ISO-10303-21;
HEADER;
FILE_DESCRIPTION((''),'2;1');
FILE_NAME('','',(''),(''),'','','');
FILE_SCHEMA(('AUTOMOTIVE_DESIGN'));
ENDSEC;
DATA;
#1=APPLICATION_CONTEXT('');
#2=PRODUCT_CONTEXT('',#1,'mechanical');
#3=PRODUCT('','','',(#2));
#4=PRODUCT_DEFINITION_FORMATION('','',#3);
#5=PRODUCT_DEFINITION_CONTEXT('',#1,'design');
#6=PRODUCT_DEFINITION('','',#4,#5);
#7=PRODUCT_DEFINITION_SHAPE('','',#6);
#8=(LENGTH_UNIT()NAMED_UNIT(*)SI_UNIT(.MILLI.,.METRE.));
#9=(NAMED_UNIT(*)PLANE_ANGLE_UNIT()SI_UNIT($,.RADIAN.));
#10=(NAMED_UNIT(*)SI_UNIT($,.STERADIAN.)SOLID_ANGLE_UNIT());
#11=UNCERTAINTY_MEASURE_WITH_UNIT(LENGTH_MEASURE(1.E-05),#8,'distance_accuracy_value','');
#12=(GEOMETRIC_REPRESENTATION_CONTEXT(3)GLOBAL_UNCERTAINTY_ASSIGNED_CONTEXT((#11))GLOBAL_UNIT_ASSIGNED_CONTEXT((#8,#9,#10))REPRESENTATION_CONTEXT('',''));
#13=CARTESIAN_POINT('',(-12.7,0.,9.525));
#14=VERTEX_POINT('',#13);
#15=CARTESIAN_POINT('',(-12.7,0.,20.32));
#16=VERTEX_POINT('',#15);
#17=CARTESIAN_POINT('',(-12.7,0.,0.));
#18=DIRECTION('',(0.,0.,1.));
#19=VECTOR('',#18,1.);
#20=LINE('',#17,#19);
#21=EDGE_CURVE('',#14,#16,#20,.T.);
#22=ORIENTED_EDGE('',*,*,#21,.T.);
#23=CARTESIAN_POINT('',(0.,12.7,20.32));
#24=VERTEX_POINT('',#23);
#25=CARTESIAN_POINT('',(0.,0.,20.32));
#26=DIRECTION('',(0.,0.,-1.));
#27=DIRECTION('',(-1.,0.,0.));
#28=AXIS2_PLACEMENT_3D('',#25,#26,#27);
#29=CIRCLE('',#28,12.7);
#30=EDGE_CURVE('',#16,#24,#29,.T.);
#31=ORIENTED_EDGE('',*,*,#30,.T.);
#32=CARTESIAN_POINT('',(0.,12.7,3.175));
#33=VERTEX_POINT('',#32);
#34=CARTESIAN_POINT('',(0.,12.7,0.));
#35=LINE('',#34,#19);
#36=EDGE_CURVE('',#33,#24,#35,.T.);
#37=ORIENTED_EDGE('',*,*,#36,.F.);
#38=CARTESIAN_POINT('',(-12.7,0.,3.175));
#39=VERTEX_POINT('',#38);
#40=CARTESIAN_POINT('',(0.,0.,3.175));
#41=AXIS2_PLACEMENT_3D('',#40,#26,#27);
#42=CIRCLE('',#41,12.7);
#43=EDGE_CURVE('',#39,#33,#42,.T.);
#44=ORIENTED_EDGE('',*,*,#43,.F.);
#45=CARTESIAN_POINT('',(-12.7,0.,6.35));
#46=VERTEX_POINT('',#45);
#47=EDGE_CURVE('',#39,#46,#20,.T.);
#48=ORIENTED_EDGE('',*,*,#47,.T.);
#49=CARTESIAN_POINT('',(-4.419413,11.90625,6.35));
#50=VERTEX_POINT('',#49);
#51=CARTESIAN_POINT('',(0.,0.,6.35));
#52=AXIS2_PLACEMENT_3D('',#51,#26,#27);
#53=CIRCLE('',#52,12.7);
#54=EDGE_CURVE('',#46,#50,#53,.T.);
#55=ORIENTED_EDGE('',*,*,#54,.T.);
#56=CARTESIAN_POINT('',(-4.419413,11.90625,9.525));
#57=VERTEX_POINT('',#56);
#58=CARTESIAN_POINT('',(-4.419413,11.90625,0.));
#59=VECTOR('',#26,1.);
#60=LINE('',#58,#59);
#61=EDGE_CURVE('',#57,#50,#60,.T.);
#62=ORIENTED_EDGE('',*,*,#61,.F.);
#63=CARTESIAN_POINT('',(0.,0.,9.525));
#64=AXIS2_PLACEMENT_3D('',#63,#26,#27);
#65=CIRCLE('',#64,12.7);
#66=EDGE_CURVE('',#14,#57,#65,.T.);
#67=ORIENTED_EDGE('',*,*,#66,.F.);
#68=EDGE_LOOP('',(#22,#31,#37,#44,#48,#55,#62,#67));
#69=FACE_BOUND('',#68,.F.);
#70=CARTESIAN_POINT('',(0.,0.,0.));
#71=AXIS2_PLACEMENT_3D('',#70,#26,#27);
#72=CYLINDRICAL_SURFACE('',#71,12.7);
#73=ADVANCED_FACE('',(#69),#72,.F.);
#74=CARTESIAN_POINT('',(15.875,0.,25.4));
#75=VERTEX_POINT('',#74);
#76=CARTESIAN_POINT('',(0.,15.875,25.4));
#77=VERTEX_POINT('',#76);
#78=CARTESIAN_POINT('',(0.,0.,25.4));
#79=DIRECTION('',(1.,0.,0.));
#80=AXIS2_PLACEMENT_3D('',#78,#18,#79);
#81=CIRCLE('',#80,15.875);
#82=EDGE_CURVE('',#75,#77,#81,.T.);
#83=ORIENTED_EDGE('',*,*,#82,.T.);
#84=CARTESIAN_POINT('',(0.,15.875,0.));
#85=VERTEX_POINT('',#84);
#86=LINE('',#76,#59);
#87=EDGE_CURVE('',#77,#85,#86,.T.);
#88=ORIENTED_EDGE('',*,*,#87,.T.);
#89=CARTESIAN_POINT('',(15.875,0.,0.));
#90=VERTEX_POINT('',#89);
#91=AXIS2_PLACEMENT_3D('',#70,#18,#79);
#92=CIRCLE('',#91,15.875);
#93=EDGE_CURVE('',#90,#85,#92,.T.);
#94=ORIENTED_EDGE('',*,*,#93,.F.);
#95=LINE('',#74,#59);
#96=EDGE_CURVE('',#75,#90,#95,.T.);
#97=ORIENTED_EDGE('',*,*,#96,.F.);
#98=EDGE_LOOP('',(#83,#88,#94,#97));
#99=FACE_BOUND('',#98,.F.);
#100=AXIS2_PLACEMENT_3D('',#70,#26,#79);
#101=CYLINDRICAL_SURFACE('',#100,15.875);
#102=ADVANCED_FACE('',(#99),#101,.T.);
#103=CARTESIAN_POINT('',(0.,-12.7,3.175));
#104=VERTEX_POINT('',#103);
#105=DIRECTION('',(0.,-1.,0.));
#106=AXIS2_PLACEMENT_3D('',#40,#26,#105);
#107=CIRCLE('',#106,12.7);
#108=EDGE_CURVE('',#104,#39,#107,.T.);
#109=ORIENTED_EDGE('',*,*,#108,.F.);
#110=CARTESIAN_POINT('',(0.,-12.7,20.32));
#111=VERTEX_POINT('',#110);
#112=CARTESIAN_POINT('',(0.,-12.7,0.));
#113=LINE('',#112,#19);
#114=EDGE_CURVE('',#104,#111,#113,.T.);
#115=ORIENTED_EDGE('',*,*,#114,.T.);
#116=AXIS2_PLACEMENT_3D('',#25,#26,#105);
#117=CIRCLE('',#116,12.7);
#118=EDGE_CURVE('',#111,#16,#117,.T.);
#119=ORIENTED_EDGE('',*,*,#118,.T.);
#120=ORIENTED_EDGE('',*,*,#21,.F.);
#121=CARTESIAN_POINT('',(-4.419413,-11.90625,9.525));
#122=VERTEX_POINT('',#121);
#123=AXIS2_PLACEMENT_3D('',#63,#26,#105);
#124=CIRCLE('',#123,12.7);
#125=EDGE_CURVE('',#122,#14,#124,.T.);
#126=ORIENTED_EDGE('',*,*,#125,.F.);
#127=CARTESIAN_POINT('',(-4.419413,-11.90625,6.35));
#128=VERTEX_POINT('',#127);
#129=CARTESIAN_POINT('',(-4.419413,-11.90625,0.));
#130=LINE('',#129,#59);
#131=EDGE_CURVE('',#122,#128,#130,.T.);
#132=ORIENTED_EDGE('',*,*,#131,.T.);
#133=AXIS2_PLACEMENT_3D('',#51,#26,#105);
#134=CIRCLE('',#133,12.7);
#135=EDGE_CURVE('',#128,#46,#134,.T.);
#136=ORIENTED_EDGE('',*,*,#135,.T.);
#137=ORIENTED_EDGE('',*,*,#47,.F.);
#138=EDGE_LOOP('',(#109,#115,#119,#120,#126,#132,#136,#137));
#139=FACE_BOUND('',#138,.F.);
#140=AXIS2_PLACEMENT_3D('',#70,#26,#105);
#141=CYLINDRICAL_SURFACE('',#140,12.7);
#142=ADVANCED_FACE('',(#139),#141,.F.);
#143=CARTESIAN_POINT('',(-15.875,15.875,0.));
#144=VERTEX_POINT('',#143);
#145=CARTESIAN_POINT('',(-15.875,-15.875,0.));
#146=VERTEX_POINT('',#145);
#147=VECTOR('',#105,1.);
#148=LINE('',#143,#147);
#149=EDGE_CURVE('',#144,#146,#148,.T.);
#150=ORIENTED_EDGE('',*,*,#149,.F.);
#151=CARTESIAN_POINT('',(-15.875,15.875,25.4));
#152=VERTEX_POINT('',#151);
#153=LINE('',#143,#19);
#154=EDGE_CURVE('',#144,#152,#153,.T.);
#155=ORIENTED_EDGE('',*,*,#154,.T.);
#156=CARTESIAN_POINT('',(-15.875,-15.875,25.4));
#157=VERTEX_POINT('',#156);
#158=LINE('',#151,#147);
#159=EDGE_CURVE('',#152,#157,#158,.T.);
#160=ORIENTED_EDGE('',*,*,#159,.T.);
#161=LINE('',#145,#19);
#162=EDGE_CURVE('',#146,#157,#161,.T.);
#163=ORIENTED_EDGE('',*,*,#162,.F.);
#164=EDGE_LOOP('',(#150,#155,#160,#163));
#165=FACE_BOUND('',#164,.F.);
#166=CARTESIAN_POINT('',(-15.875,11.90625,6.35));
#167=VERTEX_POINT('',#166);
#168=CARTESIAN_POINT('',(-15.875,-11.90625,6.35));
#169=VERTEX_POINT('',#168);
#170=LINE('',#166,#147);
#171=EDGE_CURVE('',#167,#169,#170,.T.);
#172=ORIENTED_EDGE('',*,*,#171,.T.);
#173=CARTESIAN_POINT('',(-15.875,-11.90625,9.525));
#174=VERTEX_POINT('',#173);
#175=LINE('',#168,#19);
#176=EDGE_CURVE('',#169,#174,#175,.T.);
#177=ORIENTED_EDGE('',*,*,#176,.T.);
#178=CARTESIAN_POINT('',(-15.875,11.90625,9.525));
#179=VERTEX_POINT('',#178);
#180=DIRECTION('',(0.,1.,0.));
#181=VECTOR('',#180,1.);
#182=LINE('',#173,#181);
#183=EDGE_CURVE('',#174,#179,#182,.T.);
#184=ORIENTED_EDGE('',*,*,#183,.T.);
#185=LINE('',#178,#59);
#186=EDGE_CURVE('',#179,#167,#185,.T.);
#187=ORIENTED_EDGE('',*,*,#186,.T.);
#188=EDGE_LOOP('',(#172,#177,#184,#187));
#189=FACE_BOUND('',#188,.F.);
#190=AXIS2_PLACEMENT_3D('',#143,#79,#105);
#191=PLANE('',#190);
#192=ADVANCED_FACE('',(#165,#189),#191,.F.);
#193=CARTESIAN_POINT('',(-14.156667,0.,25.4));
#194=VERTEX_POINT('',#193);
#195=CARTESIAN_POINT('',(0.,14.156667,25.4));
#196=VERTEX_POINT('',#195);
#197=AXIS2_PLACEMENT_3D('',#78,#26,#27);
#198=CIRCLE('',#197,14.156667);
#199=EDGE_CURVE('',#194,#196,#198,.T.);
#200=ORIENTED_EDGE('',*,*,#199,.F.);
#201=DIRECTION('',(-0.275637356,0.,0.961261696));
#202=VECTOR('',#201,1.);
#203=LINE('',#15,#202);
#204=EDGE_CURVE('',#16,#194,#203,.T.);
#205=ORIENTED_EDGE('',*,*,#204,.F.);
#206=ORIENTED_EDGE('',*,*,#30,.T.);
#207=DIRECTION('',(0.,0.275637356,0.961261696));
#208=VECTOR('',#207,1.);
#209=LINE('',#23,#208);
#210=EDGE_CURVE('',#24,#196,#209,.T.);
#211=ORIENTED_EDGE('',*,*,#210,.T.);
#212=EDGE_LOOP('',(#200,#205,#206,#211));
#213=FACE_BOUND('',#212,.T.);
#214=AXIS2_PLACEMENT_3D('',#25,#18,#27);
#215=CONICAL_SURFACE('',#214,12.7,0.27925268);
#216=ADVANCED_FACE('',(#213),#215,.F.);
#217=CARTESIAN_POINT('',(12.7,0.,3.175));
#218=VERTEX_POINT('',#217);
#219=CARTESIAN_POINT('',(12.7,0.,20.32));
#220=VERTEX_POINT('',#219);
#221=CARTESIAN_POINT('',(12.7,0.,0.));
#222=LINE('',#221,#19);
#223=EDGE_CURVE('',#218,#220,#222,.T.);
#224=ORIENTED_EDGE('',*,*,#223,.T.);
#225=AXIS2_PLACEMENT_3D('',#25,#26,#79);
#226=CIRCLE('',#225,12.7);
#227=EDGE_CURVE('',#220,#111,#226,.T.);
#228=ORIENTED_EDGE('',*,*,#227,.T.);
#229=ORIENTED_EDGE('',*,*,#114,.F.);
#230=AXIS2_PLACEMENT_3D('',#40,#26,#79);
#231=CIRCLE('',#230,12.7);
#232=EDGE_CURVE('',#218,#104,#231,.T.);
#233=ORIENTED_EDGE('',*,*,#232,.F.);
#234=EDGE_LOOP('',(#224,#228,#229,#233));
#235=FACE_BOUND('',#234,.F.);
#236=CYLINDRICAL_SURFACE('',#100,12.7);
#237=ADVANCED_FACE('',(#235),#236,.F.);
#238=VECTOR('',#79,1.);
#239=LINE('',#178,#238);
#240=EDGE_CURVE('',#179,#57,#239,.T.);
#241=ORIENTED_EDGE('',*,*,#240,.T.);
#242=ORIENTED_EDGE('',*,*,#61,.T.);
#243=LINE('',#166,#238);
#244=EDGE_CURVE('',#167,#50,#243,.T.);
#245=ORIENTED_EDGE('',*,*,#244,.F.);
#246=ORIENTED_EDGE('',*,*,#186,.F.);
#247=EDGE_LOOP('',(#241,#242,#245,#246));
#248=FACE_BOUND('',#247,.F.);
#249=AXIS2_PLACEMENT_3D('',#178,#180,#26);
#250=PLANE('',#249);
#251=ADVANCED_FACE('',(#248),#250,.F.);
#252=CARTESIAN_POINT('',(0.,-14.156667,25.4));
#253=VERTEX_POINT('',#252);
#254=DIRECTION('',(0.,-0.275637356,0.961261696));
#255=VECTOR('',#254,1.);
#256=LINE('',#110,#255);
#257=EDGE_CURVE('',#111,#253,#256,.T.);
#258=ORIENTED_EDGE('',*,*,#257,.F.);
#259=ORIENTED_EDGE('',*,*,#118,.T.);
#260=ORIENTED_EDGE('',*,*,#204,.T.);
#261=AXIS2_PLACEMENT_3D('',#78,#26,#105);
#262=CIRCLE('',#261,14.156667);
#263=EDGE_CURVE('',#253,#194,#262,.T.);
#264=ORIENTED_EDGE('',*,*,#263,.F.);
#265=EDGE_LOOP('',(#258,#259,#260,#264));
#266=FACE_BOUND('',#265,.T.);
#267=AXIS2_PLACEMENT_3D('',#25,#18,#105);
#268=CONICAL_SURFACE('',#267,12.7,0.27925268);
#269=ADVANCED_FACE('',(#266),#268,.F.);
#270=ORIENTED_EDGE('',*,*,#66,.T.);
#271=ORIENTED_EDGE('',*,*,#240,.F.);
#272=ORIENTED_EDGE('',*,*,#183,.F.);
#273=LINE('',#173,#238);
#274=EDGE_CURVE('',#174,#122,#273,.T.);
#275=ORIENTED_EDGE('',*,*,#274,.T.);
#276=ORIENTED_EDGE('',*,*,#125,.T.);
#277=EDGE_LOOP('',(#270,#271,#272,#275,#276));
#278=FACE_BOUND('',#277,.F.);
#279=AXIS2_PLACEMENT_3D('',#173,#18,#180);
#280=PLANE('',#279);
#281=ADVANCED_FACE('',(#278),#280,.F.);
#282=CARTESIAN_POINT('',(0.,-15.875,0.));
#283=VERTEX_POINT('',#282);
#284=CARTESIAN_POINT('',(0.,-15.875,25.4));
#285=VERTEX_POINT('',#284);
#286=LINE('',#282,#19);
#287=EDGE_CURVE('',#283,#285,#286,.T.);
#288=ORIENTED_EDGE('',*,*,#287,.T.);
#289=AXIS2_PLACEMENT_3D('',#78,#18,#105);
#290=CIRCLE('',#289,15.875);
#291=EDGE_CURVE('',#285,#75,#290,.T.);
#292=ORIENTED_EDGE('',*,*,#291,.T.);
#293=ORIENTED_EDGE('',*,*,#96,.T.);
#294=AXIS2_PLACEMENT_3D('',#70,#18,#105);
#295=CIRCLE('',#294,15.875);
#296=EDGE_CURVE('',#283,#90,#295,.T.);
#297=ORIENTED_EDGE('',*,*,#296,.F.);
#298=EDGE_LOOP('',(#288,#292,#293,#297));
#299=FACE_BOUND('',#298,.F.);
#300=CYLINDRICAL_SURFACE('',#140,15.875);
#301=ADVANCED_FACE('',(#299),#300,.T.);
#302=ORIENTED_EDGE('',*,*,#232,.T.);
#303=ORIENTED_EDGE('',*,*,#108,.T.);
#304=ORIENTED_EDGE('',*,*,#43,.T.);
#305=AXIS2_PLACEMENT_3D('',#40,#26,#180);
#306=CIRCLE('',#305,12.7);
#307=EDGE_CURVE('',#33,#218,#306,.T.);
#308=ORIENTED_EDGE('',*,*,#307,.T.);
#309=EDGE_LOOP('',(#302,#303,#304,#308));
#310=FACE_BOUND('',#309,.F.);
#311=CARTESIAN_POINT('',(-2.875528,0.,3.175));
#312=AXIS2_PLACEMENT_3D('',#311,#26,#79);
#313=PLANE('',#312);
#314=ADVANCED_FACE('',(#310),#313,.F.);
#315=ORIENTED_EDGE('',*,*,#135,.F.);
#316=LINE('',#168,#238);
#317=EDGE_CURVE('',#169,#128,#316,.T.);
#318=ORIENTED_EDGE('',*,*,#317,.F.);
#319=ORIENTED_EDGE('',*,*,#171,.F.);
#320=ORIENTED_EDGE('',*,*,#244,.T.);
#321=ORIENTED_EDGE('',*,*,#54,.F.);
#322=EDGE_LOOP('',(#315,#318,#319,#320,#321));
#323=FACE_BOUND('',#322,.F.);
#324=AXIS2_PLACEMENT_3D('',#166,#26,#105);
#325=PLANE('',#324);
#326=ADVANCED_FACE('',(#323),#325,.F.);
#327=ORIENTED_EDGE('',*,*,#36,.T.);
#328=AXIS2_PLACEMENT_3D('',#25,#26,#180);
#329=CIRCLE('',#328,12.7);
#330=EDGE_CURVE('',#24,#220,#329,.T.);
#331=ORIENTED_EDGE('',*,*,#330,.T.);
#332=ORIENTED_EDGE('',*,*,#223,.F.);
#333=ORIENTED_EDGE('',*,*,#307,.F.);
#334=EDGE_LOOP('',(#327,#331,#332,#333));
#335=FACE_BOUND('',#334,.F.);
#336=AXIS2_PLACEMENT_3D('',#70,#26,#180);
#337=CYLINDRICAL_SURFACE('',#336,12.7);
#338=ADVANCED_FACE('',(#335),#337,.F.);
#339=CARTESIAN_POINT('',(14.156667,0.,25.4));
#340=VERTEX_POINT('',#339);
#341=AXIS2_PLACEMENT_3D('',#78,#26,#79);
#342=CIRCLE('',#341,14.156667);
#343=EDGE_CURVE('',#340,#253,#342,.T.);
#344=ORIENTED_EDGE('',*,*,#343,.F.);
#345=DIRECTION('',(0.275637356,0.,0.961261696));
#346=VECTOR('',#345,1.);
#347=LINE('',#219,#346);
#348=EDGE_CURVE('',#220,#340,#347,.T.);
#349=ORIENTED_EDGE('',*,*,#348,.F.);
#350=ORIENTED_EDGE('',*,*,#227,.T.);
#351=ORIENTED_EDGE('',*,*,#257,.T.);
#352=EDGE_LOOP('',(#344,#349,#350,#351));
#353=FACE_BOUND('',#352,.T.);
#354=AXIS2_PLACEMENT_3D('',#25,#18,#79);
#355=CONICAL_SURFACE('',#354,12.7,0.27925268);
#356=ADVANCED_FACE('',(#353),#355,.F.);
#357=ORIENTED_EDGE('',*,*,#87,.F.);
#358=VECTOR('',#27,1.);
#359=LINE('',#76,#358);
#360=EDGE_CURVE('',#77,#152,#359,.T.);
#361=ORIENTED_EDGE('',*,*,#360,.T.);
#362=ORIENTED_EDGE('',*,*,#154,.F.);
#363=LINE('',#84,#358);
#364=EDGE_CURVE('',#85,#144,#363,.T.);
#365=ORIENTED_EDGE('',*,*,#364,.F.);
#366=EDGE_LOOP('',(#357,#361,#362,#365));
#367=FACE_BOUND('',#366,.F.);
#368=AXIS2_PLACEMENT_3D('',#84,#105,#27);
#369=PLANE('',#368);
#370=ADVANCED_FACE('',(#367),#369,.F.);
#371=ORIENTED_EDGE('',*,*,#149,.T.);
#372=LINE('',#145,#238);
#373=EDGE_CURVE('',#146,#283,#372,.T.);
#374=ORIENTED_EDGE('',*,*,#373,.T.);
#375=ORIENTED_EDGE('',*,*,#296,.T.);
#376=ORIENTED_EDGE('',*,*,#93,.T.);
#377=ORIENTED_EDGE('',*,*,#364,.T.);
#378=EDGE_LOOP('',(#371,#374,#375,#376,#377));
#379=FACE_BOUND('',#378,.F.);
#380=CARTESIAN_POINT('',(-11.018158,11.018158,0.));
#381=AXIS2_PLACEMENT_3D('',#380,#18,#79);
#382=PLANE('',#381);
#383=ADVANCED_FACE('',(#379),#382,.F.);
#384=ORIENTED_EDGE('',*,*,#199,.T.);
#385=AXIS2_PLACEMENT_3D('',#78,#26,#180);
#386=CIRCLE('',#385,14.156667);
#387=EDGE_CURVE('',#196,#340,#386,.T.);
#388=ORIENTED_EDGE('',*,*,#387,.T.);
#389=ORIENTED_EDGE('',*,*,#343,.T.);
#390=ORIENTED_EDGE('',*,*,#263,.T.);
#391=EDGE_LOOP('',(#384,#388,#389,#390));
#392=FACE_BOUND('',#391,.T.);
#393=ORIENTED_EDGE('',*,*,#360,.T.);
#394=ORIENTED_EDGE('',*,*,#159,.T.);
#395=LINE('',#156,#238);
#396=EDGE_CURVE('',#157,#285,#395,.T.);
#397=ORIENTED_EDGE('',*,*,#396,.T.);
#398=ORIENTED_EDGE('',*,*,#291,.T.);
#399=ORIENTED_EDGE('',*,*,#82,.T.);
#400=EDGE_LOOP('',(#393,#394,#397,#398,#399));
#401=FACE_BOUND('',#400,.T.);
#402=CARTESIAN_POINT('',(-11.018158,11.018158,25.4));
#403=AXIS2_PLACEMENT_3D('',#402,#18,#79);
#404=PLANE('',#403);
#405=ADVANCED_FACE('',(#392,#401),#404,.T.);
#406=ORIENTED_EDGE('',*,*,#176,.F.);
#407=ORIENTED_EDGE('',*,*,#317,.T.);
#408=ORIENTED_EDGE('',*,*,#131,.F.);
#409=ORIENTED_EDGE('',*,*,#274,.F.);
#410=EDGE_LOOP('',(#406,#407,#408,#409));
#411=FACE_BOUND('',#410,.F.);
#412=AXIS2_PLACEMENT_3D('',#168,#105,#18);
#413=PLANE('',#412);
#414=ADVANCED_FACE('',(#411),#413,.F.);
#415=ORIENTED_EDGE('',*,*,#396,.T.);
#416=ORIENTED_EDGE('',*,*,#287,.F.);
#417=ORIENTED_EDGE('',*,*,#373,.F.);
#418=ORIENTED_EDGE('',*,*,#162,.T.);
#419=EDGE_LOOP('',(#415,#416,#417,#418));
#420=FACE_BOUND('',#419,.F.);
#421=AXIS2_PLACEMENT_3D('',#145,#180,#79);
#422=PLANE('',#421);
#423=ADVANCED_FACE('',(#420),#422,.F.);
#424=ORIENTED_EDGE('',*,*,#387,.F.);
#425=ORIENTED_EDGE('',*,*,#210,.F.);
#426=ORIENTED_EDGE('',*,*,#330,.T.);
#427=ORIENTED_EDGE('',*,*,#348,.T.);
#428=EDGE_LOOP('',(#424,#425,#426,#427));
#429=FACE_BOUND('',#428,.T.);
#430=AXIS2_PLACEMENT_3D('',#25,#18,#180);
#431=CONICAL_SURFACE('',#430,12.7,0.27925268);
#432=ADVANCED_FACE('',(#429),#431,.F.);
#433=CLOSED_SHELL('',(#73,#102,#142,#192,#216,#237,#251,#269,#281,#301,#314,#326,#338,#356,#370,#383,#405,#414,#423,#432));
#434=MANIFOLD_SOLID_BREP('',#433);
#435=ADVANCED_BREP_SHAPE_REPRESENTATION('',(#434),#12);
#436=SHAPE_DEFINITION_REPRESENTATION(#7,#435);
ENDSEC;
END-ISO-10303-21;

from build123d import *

# Parameters (mm, degrees)
F1_DEPTH = 25.4
F2_R     = 12.7
F3_DEPTH = 3.175
F5_DEPTH = 12.7
F6_SIZE2 = 1.4566665597
F6_SIZE  = 5.08


with BuildPart() as f1:
    # F0 (on Top) → F1 (new body)
    with BuildSketch(Plane.XY):
        with BuildLine():
            ThreePointArc((-15.875, 0), (-11.2253201513, 11.2253201513), (0, 15.875))
            Line((0, 15.875), (-15.875, 15.875))
            Line((-15.875, 15.875), (-15.875, 0))
        make_face()
        with BuildLine():
            Line((-15.875, -15.875), (0, -15.875))
            ThreePointArc((0, -15.875), (-11.2253201513, -11.2253201513), (-15.875, 0))
            Line((-15.875, 0), (-15.875, -15.875))
        make_face()
        with BuildLine():
            Line((0, -15.875), (0, -12.7))
            ThreePointArc((0, -12.7), (-8.9802561211, -8.9802561211), (-12.7, 0))
            Line((-12.7, 0), (-15.875, 0))
            ThreePointArc((-15.875, 0), (-11.2253201513, -11.2253201513), (0, -15.875))
        make_face()
        with BuildLine():
            ThreePointArc((-12.7, 0), (-8.9802561211, 8.9802561211), (0, 12.7))
            Line((0, 12.7), (0, 15.875))
            ThreePointArc((0, 15.875), (-11.2253201513, 11.2253201513), (-15.875, 0))
            Line((-15.875, 0), (-12.7, 0))
        make_face()
        with BuildLine():
            ThreePointArc((0, 12.7), (8.9802561211, 8.9802561211), (12.7, 0))
            ThreePointArc((12.7, 0), (8.9802561211, -8.9802561211), (0, -12.7))
            Line((0, -12.7), (0, -15.875))
            ThreePointArc((0, -15.875), (11.2253201513, -11.2253201513), (15.875, 0))
            ThreePointArc((15.875, 0), (11.2253201513, 11.2253201513), (0, 15.875))
            Line((0, 15.875), (0, 12.7))
        make_face()
    extrude(amount=F1_DEPTH)

    # F2 (on face) → F3 (join)
    with BuildSketch(Plane(origin=(0, 0, 0), x_dir=(1, 0, 0), z_dir=(0, 0, -1))):
        with BuildLine():
            Line((-15.875, 15.875), (-15.875, -15.875))
            Line((-15.875, -15.875), (0, -15.875))
            ThreePointArc((0, -15.875), (15.875, 0), (0, 15.875))
            Line((0, 15.875), (-15.875, 15.875))
        make_face()
        Circle(F2_R, mode=Mode.SUBTRACT)
        Circle(F2_R)
    extrude(amount=-F3_DEPTH)

    # F4 (on face) → F5 (cut)
    with BuildSketch(Plane(origin=(-15.875, 0, 0), x_dir=(0, -1, 0), z_dir=(-1, 0, 0))):
        Polygon((0, 6.35), (0, 9.525), (-7.9375, 9.525), (-11.90625, 9.525), (-11.90625, 6.35), (-7.9375, 6.35), align=None)
        Polygon((7.9375, 9.525), (0, 9.525), (0, 6.35), (7.9375, 6.35), (11.90625, 6.35), (11.90625, 9.525), align=None)
    extrude(amount=-F5_DEPTH, mode=Mode.SUBTRACT)

    # F6
    f6_edges = [f1.edges().sort_by_distance(p)[0] for p in [
        (0, -12.7, 25.4),
    ]]
    f6_side = f1.faces().sort_by_distance((0, -12.7, 14.2875))[0]
    chamfer(f6_edges, length=F6_SIZE, length2=F6_SIZE2, reference=f6_side)


solid = f1.part
